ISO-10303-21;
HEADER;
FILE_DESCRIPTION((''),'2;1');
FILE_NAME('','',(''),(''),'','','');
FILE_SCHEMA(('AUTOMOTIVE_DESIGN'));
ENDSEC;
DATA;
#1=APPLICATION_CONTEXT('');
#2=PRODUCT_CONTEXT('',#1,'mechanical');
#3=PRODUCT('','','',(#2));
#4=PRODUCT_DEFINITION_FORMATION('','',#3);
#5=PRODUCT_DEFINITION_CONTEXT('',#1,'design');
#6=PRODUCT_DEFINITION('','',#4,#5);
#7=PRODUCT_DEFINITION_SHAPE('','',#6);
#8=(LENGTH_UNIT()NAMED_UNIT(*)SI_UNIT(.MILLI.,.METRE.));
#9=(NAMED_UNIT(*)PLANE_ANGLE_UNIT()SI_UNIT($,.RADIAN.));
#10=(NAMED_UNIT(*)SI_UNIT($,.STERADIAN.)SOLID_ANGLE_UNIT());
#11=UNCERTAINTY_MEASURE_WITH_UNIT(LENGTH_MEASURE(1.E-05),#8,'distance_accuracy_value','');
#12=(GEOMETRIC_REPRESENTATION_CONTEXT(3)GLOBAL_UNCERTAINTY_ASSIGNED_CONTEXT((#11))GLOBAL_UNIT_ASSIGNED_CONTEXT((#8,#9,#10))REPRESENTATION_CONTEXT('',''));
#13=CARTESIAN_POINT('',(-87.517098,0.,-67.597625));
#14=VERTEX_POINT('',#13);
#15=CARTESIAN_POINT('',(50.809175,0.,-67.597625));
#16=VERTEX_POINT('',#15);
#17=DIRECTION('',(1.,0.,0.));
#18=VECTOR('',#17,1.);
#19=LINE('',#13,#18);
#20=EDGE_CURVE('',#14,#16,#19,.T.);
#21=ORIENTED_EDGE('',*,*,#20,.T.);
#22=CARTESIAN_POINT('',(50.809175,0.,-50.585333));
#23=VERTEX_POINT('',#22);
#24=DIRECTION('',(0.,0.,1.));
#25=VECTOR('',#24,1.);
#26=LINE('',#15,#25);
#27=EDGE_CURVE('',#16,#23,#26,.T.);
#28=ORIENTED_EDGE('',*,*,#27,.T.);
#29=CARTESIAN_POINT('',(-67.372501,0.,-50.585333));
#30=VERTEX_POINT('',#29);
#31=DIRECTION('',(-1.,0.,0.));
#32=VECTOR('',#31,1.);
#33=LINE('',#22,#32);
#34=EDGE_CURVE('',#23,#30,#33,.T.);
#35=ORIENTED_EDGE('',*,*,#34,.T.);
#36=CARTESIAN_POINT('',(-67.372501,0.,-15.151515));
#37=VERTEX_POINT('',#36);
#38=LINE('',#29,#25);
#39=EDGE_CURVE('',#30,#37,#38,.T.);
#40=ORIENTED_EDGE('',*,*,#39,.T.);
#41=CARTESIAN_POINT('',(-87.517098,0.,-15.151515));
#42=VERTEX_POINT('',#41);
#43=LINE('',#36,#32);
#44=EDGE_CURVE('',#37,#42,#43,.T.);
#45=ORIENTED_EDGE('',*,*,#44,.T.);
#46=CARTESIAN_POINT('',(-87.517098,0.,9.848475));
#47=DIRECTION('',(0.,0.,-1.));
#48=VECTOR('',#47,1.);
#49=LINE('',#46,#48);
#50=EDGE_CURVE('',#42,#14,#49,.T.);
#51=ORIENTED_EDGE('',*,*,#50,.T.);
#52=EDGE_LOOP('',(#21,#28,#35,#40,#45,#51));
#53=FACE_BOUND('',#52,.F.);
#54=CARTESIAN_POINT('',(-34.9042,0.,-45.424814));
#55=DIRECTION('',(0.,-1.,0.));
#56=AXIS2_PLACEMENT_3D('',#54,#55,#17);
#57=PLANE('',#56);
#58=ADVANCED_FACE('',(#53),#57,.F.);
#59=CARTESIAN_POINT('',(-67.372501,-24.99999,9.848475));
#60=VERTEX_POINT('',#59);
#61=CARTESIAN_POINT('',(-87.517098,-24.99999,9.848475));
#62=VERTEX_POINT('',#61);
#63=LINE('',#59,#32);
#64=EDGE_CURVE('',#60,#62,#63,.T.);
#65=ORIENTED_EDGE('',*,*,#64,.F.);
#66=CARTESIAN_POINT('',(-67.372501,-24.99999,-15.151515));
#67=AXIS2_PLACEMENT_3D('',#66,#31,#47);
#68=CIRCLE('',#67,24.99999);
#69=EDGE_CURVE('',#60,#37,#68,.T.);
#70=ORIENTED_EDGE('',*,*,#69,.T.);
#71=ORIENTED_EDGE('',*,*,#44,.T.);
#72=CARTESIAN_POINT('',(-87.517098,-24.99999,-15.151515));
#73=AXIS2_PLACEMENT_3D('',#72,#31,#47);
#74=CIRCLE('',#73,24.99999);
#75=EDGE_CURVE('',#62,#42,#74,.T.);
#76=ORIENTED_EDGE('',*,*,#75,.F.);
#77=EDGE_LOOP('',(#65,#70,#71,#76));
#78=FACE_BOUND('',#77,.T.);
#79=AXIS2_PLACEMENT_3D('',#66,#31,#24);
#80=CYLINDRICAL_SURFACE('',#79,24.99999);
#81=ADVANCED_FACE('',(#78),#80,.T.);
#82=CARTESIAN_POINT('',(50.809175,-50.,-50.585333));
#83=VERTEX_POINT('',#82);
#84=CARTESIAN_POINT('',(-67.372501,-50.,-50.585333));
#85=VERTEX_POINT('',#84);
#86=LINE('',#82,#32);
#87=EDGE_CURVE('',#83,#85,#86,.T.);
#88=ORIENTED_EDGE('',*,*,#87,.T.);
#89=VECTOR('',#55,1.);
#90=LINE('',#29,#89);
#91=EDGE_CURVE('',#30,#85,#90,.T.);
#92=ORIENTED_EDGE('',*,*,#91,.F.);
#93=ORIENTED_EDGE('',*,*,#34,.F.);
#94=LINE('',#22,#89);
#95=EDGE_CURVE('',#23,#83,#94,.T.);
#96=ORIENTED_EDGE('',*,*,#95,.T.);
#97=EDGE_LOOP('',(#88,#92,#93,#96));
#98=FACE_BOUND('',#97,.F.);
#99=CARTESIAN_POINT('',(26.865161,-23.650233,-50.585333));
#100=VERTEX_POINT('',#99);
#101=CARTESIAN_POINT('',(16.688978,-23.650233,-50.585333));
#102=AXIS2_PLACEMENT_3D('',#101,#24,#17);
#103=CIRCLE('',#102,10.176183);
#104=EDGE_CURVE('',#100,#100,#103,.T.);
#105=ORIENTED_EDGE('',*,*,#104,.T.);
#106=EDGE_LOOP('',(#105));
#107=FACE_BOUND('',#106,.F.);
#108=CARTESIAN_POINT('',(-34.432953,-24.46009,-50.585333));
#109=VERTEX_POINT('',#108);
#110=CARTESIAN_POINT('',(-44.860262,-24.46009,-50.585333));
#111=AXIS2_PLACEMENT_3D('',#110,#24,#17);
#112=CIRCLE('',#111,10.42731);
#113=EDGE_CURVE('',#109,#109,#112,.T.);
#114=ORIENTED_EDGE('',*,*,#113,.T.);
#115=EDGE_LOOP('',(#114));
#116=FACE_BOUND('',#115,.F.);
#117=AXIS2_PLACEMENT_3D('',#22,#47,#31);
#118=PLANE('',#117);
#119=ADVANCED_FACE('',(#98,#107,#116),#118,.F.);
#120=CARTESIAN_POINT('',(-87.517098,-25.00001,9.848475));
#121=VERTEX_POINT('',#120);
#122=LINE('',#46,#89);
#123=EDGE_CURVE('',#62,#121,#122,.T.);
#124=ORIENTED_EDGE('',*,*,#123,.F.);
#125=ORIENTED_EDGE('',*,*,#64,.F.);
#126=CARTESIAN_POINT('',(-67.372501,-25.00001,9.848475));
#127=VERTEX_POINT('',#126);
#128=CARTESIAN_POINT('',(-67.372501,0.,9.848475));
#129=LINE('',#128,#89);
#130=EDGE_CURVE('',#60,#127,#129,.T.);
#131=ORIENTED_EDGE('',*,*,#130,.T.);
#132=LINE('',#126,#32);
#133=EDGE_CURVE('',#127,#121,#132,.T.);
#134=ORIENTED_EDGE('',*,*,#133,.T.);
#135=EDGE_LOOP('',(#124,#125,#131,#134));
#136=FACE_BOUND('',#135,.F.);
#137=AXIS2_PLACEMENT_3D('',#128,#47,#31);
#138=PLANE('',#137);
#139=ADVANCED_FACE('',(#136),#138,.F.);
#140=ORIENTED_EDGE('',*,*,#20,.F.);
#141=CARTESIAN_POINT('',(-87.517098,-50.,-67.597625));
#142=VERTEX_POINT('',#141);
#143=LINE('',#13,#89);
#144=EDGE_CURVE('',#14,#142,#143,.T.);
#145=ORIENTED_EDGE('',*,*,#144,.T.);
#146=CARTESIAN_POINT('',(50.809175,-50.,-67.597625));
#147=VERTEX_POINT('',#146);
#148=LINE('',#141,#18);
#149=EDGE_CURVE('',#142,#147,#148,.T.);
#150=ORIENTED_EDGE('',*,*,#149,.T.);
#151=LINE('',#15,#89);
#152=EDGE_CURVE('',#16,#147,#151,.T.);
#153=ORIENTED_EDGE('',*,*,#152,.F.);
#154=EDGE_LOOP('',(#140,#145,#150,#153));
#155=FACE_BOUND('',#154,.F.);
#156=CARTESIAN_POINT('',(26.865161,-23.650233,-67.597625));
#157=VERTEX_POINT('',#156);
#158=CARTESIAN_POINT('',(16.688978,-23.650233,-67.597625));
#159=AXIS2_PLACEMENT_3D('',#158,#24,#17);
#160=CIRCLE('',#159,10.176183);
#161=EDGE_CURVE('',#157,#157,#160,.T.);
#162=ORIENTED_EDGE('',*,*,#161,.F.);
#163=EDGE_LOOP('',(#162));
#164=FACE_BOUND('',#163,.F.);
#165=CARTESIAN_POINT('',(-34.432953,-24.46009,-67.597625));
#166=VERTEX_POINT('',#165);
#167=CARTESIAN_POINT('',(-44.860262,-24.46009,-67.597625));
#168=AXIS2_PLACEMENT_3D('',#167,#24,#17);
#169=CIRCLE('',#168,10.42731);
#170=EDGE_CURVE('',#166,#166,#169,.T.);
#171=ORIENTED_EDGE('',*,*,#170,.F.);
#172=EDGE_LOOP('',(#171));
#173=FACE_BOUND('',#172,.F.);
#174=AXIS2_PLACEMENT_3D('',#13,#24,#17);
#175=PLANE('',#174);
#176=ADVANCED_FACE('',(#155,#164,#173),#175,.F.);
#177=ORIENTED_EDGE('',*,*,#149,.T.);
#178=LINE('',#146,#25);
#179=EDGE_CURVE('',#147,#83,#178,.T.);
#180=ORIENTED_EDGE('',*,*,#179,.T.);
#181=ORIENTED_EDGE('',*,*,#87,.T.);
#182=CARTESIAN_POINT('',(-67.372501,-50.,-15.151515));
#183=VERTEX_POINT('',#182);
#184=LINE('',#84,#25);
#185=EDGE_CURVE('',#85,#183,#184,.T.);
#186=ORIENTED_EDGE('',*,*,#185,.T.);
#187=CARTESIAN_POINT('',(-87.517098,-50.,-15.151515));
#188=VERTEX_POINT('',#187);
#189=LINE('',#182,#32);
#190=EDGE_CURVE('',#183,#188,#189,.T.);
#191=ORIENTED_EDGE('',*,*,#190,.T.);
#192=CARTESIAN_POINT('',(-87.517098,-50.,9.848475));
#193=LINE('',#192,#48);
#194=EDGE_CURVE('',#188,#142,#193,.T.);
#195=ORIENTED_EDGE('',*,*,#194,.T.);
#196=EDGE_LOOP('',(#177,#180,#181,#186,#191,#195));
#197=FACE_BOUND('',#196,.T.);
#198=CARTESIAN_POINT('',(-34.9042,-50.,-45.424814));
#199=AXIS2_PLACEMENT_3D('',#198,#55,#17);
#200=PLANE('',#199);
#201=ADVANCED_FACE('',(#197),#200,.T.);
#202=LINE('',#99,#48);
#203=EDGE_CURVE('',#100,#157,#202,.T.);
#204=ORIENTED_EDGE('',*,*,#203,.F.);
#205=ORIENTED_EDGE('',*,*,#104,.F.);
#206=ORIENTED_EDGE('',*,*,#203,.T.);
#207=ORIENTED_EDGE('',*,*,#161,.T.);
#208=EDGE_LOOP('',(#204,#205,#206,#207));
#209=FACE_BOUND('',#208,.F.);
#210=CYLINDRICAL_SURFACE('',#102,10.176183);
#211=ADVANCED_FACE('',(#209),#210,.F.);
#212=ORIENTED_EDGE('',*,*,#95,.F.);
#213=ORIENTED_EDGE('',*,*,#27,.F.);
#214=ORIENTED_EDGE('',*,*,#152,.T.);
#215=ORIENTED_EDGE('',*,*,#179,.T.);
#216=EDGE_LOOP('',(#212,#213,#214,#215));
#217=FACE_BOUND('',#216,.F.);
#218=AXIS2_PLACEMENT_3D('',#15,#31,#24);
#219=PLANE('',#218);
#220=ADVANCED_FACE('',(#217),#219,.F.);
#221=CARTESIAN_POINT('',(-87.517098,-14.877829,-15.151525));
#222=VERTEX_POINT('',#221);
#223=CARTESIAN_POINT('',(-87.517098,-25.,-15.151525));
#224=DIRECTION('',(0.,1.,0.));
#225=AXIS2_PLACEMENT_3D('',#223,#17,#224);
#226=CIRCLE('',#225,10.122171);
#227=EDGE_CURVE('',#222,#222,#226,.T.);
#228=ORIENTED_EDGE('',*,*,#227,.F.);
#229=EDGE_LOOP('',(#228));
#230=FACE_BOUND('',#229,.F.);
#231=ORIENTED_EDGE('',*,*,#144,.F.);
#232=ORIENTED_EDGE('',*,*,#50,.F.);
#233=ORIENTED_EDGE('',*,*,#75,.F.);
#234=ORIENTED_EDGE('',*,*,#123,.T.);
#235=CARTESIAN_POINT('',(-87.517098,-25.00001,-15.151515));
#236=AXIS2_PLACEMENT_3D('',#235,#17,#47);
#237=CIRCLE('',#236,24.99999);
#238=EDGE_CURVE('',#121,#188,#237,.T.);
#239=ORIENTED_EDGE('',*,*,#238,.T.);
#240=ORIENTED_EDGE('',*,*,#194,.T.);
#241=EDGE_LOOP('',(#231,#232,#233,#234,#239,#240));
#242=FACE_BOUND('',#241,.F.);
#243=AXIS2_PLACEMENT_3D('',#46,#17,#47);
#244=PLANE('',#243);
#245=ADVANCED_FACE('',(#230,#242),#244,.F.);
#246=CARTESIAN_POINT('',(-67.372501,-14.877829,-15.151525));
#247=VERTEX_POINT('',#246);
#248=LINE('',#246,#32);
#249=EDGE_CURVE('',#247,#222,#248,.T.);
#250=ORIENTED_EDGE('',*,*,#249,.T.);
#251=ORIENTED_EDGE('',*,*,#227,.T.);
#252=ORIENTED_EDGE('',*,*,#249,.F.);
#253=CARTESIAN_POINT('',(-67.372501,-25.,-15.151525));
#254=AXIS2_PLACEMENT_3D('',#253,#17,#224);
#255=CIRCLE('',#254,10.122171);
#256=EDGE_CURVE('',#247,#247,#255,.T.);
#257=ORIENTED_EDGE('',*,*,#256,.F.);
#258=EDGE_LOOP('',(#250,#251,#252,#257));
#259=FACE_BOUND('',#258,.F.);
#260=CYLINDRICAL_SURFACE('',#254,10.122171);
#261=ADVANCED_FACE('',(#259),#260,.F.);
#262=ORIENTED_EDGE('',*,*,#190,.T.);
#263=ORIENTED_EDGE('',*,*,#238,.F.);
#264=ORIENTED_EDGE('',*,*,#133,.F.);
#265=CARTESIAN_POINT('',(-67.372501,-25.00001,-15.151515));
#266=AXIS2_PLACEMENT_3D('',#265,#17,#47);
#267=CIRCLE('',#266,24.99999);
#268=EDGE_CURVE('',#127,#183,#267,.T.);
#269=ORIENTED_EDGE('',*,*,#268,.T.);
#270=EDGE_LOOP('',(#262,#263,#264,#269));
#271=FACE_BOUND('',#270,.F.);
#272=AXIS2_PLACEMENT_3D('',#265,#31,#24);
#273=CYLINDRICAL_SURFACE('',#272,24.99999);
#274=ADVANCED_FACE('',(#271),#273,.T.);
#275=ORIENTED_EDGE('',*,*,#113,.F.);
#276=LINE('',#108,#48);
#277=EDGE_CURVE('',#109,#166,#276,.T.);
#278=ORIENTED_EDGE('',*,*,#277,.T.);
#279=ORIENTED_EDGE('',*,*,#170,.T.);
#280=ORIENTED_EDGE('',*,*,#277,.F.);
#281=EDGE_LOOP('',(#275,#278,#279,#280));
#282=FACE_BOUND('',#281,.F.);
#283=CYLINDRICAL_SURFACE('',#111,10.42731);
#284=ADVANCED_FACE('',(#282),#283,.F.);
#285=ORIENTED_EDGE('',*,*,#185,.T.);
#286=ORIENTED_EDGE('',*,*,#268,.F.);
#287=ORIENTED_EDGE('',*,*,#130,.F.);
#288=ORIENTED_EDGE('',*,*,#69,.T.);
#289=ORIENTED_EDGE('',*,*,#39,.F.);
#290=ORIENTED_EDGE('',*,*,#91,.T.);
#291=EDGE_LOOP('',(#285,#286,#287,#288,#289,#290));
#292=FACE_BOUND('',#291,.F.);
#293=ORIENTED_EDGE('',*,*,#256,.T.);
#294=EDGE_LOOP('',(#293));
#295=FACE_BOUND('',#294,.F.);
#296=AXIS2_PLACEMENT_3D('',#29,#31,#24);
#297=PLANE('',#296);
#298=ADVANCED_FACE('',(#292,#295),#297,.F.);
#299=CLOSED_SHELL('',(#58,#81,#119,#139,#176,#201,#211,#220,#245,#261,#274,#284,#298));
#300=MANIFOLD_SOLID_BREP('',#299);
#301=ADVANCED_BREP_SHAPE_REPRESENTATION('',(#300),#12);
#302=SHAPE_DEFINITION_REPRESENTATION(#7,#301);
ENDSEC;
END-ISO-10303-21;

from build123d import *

# Parameters (mm, degrees)
F1_DEPTH = 50
F2_R     = 24.99999
F3_R     = 10.4273095681
F3_R_2   = 10.1761827098
F4_DEPTH = 25
F5_R     = 10.1221707253
F6_DEPTH = 25


# Not quite as in the source:
# - a fillet or chamfer is up to 0.001 mm smaller than in the source, because OpenCascade refuses the exact size


with BuildPart() as f1:
    # F0 (on Front) → F1 (new body)
    with BuildSketch(Plane.XZ):
        Polygon((-87.5170975924, 9.8484745249), (-87.5170975924, -67.5976250101), (50.8091747761, -67.5976250101), (50.8091747761, -50.5853332579), (-67.3725008965, -50.5853332579), (-67.3725008965, 9.8484745249), align=None)
    extrude(amount=F1_DEPTH)

    # F2 (radius 25 in the source; OpenCascade refuses exactly that, so slightly less here)
    f2_edges = [f1.edges().sort_by_distance(p)[0] for p in [
        (-77.444799, -50, 9.848475),
        (-77.444799, 0, 9.848475),
    ]]
    fillet(f2_edges, radius=F2_R)

    # F3 (on face) → F4 (cut)
    with BuildSketch(Plane.XY.offset(-50.5853332579)):
        with Locations((-44.8602624238, -24.4600903243)):
            Circle(F3_R)
        with Locations((16.6889782995, -23.6502327025)):
            Circle(F3_R_2)
    extrude(amount=-F4_DEPTH, mode=Mode.SUBTRACT)

    # F5 (on face) → F6 (cut)
    with BuildSketch(Plane.YZ.offset(-67.3725008965)):
        with Locations((-25, -15.1515254751)):
            Circle(F5_R)
    extrude(amount=-F6_DEPTH, mode=Mode.SUBTRACT)


solid = f1.part
